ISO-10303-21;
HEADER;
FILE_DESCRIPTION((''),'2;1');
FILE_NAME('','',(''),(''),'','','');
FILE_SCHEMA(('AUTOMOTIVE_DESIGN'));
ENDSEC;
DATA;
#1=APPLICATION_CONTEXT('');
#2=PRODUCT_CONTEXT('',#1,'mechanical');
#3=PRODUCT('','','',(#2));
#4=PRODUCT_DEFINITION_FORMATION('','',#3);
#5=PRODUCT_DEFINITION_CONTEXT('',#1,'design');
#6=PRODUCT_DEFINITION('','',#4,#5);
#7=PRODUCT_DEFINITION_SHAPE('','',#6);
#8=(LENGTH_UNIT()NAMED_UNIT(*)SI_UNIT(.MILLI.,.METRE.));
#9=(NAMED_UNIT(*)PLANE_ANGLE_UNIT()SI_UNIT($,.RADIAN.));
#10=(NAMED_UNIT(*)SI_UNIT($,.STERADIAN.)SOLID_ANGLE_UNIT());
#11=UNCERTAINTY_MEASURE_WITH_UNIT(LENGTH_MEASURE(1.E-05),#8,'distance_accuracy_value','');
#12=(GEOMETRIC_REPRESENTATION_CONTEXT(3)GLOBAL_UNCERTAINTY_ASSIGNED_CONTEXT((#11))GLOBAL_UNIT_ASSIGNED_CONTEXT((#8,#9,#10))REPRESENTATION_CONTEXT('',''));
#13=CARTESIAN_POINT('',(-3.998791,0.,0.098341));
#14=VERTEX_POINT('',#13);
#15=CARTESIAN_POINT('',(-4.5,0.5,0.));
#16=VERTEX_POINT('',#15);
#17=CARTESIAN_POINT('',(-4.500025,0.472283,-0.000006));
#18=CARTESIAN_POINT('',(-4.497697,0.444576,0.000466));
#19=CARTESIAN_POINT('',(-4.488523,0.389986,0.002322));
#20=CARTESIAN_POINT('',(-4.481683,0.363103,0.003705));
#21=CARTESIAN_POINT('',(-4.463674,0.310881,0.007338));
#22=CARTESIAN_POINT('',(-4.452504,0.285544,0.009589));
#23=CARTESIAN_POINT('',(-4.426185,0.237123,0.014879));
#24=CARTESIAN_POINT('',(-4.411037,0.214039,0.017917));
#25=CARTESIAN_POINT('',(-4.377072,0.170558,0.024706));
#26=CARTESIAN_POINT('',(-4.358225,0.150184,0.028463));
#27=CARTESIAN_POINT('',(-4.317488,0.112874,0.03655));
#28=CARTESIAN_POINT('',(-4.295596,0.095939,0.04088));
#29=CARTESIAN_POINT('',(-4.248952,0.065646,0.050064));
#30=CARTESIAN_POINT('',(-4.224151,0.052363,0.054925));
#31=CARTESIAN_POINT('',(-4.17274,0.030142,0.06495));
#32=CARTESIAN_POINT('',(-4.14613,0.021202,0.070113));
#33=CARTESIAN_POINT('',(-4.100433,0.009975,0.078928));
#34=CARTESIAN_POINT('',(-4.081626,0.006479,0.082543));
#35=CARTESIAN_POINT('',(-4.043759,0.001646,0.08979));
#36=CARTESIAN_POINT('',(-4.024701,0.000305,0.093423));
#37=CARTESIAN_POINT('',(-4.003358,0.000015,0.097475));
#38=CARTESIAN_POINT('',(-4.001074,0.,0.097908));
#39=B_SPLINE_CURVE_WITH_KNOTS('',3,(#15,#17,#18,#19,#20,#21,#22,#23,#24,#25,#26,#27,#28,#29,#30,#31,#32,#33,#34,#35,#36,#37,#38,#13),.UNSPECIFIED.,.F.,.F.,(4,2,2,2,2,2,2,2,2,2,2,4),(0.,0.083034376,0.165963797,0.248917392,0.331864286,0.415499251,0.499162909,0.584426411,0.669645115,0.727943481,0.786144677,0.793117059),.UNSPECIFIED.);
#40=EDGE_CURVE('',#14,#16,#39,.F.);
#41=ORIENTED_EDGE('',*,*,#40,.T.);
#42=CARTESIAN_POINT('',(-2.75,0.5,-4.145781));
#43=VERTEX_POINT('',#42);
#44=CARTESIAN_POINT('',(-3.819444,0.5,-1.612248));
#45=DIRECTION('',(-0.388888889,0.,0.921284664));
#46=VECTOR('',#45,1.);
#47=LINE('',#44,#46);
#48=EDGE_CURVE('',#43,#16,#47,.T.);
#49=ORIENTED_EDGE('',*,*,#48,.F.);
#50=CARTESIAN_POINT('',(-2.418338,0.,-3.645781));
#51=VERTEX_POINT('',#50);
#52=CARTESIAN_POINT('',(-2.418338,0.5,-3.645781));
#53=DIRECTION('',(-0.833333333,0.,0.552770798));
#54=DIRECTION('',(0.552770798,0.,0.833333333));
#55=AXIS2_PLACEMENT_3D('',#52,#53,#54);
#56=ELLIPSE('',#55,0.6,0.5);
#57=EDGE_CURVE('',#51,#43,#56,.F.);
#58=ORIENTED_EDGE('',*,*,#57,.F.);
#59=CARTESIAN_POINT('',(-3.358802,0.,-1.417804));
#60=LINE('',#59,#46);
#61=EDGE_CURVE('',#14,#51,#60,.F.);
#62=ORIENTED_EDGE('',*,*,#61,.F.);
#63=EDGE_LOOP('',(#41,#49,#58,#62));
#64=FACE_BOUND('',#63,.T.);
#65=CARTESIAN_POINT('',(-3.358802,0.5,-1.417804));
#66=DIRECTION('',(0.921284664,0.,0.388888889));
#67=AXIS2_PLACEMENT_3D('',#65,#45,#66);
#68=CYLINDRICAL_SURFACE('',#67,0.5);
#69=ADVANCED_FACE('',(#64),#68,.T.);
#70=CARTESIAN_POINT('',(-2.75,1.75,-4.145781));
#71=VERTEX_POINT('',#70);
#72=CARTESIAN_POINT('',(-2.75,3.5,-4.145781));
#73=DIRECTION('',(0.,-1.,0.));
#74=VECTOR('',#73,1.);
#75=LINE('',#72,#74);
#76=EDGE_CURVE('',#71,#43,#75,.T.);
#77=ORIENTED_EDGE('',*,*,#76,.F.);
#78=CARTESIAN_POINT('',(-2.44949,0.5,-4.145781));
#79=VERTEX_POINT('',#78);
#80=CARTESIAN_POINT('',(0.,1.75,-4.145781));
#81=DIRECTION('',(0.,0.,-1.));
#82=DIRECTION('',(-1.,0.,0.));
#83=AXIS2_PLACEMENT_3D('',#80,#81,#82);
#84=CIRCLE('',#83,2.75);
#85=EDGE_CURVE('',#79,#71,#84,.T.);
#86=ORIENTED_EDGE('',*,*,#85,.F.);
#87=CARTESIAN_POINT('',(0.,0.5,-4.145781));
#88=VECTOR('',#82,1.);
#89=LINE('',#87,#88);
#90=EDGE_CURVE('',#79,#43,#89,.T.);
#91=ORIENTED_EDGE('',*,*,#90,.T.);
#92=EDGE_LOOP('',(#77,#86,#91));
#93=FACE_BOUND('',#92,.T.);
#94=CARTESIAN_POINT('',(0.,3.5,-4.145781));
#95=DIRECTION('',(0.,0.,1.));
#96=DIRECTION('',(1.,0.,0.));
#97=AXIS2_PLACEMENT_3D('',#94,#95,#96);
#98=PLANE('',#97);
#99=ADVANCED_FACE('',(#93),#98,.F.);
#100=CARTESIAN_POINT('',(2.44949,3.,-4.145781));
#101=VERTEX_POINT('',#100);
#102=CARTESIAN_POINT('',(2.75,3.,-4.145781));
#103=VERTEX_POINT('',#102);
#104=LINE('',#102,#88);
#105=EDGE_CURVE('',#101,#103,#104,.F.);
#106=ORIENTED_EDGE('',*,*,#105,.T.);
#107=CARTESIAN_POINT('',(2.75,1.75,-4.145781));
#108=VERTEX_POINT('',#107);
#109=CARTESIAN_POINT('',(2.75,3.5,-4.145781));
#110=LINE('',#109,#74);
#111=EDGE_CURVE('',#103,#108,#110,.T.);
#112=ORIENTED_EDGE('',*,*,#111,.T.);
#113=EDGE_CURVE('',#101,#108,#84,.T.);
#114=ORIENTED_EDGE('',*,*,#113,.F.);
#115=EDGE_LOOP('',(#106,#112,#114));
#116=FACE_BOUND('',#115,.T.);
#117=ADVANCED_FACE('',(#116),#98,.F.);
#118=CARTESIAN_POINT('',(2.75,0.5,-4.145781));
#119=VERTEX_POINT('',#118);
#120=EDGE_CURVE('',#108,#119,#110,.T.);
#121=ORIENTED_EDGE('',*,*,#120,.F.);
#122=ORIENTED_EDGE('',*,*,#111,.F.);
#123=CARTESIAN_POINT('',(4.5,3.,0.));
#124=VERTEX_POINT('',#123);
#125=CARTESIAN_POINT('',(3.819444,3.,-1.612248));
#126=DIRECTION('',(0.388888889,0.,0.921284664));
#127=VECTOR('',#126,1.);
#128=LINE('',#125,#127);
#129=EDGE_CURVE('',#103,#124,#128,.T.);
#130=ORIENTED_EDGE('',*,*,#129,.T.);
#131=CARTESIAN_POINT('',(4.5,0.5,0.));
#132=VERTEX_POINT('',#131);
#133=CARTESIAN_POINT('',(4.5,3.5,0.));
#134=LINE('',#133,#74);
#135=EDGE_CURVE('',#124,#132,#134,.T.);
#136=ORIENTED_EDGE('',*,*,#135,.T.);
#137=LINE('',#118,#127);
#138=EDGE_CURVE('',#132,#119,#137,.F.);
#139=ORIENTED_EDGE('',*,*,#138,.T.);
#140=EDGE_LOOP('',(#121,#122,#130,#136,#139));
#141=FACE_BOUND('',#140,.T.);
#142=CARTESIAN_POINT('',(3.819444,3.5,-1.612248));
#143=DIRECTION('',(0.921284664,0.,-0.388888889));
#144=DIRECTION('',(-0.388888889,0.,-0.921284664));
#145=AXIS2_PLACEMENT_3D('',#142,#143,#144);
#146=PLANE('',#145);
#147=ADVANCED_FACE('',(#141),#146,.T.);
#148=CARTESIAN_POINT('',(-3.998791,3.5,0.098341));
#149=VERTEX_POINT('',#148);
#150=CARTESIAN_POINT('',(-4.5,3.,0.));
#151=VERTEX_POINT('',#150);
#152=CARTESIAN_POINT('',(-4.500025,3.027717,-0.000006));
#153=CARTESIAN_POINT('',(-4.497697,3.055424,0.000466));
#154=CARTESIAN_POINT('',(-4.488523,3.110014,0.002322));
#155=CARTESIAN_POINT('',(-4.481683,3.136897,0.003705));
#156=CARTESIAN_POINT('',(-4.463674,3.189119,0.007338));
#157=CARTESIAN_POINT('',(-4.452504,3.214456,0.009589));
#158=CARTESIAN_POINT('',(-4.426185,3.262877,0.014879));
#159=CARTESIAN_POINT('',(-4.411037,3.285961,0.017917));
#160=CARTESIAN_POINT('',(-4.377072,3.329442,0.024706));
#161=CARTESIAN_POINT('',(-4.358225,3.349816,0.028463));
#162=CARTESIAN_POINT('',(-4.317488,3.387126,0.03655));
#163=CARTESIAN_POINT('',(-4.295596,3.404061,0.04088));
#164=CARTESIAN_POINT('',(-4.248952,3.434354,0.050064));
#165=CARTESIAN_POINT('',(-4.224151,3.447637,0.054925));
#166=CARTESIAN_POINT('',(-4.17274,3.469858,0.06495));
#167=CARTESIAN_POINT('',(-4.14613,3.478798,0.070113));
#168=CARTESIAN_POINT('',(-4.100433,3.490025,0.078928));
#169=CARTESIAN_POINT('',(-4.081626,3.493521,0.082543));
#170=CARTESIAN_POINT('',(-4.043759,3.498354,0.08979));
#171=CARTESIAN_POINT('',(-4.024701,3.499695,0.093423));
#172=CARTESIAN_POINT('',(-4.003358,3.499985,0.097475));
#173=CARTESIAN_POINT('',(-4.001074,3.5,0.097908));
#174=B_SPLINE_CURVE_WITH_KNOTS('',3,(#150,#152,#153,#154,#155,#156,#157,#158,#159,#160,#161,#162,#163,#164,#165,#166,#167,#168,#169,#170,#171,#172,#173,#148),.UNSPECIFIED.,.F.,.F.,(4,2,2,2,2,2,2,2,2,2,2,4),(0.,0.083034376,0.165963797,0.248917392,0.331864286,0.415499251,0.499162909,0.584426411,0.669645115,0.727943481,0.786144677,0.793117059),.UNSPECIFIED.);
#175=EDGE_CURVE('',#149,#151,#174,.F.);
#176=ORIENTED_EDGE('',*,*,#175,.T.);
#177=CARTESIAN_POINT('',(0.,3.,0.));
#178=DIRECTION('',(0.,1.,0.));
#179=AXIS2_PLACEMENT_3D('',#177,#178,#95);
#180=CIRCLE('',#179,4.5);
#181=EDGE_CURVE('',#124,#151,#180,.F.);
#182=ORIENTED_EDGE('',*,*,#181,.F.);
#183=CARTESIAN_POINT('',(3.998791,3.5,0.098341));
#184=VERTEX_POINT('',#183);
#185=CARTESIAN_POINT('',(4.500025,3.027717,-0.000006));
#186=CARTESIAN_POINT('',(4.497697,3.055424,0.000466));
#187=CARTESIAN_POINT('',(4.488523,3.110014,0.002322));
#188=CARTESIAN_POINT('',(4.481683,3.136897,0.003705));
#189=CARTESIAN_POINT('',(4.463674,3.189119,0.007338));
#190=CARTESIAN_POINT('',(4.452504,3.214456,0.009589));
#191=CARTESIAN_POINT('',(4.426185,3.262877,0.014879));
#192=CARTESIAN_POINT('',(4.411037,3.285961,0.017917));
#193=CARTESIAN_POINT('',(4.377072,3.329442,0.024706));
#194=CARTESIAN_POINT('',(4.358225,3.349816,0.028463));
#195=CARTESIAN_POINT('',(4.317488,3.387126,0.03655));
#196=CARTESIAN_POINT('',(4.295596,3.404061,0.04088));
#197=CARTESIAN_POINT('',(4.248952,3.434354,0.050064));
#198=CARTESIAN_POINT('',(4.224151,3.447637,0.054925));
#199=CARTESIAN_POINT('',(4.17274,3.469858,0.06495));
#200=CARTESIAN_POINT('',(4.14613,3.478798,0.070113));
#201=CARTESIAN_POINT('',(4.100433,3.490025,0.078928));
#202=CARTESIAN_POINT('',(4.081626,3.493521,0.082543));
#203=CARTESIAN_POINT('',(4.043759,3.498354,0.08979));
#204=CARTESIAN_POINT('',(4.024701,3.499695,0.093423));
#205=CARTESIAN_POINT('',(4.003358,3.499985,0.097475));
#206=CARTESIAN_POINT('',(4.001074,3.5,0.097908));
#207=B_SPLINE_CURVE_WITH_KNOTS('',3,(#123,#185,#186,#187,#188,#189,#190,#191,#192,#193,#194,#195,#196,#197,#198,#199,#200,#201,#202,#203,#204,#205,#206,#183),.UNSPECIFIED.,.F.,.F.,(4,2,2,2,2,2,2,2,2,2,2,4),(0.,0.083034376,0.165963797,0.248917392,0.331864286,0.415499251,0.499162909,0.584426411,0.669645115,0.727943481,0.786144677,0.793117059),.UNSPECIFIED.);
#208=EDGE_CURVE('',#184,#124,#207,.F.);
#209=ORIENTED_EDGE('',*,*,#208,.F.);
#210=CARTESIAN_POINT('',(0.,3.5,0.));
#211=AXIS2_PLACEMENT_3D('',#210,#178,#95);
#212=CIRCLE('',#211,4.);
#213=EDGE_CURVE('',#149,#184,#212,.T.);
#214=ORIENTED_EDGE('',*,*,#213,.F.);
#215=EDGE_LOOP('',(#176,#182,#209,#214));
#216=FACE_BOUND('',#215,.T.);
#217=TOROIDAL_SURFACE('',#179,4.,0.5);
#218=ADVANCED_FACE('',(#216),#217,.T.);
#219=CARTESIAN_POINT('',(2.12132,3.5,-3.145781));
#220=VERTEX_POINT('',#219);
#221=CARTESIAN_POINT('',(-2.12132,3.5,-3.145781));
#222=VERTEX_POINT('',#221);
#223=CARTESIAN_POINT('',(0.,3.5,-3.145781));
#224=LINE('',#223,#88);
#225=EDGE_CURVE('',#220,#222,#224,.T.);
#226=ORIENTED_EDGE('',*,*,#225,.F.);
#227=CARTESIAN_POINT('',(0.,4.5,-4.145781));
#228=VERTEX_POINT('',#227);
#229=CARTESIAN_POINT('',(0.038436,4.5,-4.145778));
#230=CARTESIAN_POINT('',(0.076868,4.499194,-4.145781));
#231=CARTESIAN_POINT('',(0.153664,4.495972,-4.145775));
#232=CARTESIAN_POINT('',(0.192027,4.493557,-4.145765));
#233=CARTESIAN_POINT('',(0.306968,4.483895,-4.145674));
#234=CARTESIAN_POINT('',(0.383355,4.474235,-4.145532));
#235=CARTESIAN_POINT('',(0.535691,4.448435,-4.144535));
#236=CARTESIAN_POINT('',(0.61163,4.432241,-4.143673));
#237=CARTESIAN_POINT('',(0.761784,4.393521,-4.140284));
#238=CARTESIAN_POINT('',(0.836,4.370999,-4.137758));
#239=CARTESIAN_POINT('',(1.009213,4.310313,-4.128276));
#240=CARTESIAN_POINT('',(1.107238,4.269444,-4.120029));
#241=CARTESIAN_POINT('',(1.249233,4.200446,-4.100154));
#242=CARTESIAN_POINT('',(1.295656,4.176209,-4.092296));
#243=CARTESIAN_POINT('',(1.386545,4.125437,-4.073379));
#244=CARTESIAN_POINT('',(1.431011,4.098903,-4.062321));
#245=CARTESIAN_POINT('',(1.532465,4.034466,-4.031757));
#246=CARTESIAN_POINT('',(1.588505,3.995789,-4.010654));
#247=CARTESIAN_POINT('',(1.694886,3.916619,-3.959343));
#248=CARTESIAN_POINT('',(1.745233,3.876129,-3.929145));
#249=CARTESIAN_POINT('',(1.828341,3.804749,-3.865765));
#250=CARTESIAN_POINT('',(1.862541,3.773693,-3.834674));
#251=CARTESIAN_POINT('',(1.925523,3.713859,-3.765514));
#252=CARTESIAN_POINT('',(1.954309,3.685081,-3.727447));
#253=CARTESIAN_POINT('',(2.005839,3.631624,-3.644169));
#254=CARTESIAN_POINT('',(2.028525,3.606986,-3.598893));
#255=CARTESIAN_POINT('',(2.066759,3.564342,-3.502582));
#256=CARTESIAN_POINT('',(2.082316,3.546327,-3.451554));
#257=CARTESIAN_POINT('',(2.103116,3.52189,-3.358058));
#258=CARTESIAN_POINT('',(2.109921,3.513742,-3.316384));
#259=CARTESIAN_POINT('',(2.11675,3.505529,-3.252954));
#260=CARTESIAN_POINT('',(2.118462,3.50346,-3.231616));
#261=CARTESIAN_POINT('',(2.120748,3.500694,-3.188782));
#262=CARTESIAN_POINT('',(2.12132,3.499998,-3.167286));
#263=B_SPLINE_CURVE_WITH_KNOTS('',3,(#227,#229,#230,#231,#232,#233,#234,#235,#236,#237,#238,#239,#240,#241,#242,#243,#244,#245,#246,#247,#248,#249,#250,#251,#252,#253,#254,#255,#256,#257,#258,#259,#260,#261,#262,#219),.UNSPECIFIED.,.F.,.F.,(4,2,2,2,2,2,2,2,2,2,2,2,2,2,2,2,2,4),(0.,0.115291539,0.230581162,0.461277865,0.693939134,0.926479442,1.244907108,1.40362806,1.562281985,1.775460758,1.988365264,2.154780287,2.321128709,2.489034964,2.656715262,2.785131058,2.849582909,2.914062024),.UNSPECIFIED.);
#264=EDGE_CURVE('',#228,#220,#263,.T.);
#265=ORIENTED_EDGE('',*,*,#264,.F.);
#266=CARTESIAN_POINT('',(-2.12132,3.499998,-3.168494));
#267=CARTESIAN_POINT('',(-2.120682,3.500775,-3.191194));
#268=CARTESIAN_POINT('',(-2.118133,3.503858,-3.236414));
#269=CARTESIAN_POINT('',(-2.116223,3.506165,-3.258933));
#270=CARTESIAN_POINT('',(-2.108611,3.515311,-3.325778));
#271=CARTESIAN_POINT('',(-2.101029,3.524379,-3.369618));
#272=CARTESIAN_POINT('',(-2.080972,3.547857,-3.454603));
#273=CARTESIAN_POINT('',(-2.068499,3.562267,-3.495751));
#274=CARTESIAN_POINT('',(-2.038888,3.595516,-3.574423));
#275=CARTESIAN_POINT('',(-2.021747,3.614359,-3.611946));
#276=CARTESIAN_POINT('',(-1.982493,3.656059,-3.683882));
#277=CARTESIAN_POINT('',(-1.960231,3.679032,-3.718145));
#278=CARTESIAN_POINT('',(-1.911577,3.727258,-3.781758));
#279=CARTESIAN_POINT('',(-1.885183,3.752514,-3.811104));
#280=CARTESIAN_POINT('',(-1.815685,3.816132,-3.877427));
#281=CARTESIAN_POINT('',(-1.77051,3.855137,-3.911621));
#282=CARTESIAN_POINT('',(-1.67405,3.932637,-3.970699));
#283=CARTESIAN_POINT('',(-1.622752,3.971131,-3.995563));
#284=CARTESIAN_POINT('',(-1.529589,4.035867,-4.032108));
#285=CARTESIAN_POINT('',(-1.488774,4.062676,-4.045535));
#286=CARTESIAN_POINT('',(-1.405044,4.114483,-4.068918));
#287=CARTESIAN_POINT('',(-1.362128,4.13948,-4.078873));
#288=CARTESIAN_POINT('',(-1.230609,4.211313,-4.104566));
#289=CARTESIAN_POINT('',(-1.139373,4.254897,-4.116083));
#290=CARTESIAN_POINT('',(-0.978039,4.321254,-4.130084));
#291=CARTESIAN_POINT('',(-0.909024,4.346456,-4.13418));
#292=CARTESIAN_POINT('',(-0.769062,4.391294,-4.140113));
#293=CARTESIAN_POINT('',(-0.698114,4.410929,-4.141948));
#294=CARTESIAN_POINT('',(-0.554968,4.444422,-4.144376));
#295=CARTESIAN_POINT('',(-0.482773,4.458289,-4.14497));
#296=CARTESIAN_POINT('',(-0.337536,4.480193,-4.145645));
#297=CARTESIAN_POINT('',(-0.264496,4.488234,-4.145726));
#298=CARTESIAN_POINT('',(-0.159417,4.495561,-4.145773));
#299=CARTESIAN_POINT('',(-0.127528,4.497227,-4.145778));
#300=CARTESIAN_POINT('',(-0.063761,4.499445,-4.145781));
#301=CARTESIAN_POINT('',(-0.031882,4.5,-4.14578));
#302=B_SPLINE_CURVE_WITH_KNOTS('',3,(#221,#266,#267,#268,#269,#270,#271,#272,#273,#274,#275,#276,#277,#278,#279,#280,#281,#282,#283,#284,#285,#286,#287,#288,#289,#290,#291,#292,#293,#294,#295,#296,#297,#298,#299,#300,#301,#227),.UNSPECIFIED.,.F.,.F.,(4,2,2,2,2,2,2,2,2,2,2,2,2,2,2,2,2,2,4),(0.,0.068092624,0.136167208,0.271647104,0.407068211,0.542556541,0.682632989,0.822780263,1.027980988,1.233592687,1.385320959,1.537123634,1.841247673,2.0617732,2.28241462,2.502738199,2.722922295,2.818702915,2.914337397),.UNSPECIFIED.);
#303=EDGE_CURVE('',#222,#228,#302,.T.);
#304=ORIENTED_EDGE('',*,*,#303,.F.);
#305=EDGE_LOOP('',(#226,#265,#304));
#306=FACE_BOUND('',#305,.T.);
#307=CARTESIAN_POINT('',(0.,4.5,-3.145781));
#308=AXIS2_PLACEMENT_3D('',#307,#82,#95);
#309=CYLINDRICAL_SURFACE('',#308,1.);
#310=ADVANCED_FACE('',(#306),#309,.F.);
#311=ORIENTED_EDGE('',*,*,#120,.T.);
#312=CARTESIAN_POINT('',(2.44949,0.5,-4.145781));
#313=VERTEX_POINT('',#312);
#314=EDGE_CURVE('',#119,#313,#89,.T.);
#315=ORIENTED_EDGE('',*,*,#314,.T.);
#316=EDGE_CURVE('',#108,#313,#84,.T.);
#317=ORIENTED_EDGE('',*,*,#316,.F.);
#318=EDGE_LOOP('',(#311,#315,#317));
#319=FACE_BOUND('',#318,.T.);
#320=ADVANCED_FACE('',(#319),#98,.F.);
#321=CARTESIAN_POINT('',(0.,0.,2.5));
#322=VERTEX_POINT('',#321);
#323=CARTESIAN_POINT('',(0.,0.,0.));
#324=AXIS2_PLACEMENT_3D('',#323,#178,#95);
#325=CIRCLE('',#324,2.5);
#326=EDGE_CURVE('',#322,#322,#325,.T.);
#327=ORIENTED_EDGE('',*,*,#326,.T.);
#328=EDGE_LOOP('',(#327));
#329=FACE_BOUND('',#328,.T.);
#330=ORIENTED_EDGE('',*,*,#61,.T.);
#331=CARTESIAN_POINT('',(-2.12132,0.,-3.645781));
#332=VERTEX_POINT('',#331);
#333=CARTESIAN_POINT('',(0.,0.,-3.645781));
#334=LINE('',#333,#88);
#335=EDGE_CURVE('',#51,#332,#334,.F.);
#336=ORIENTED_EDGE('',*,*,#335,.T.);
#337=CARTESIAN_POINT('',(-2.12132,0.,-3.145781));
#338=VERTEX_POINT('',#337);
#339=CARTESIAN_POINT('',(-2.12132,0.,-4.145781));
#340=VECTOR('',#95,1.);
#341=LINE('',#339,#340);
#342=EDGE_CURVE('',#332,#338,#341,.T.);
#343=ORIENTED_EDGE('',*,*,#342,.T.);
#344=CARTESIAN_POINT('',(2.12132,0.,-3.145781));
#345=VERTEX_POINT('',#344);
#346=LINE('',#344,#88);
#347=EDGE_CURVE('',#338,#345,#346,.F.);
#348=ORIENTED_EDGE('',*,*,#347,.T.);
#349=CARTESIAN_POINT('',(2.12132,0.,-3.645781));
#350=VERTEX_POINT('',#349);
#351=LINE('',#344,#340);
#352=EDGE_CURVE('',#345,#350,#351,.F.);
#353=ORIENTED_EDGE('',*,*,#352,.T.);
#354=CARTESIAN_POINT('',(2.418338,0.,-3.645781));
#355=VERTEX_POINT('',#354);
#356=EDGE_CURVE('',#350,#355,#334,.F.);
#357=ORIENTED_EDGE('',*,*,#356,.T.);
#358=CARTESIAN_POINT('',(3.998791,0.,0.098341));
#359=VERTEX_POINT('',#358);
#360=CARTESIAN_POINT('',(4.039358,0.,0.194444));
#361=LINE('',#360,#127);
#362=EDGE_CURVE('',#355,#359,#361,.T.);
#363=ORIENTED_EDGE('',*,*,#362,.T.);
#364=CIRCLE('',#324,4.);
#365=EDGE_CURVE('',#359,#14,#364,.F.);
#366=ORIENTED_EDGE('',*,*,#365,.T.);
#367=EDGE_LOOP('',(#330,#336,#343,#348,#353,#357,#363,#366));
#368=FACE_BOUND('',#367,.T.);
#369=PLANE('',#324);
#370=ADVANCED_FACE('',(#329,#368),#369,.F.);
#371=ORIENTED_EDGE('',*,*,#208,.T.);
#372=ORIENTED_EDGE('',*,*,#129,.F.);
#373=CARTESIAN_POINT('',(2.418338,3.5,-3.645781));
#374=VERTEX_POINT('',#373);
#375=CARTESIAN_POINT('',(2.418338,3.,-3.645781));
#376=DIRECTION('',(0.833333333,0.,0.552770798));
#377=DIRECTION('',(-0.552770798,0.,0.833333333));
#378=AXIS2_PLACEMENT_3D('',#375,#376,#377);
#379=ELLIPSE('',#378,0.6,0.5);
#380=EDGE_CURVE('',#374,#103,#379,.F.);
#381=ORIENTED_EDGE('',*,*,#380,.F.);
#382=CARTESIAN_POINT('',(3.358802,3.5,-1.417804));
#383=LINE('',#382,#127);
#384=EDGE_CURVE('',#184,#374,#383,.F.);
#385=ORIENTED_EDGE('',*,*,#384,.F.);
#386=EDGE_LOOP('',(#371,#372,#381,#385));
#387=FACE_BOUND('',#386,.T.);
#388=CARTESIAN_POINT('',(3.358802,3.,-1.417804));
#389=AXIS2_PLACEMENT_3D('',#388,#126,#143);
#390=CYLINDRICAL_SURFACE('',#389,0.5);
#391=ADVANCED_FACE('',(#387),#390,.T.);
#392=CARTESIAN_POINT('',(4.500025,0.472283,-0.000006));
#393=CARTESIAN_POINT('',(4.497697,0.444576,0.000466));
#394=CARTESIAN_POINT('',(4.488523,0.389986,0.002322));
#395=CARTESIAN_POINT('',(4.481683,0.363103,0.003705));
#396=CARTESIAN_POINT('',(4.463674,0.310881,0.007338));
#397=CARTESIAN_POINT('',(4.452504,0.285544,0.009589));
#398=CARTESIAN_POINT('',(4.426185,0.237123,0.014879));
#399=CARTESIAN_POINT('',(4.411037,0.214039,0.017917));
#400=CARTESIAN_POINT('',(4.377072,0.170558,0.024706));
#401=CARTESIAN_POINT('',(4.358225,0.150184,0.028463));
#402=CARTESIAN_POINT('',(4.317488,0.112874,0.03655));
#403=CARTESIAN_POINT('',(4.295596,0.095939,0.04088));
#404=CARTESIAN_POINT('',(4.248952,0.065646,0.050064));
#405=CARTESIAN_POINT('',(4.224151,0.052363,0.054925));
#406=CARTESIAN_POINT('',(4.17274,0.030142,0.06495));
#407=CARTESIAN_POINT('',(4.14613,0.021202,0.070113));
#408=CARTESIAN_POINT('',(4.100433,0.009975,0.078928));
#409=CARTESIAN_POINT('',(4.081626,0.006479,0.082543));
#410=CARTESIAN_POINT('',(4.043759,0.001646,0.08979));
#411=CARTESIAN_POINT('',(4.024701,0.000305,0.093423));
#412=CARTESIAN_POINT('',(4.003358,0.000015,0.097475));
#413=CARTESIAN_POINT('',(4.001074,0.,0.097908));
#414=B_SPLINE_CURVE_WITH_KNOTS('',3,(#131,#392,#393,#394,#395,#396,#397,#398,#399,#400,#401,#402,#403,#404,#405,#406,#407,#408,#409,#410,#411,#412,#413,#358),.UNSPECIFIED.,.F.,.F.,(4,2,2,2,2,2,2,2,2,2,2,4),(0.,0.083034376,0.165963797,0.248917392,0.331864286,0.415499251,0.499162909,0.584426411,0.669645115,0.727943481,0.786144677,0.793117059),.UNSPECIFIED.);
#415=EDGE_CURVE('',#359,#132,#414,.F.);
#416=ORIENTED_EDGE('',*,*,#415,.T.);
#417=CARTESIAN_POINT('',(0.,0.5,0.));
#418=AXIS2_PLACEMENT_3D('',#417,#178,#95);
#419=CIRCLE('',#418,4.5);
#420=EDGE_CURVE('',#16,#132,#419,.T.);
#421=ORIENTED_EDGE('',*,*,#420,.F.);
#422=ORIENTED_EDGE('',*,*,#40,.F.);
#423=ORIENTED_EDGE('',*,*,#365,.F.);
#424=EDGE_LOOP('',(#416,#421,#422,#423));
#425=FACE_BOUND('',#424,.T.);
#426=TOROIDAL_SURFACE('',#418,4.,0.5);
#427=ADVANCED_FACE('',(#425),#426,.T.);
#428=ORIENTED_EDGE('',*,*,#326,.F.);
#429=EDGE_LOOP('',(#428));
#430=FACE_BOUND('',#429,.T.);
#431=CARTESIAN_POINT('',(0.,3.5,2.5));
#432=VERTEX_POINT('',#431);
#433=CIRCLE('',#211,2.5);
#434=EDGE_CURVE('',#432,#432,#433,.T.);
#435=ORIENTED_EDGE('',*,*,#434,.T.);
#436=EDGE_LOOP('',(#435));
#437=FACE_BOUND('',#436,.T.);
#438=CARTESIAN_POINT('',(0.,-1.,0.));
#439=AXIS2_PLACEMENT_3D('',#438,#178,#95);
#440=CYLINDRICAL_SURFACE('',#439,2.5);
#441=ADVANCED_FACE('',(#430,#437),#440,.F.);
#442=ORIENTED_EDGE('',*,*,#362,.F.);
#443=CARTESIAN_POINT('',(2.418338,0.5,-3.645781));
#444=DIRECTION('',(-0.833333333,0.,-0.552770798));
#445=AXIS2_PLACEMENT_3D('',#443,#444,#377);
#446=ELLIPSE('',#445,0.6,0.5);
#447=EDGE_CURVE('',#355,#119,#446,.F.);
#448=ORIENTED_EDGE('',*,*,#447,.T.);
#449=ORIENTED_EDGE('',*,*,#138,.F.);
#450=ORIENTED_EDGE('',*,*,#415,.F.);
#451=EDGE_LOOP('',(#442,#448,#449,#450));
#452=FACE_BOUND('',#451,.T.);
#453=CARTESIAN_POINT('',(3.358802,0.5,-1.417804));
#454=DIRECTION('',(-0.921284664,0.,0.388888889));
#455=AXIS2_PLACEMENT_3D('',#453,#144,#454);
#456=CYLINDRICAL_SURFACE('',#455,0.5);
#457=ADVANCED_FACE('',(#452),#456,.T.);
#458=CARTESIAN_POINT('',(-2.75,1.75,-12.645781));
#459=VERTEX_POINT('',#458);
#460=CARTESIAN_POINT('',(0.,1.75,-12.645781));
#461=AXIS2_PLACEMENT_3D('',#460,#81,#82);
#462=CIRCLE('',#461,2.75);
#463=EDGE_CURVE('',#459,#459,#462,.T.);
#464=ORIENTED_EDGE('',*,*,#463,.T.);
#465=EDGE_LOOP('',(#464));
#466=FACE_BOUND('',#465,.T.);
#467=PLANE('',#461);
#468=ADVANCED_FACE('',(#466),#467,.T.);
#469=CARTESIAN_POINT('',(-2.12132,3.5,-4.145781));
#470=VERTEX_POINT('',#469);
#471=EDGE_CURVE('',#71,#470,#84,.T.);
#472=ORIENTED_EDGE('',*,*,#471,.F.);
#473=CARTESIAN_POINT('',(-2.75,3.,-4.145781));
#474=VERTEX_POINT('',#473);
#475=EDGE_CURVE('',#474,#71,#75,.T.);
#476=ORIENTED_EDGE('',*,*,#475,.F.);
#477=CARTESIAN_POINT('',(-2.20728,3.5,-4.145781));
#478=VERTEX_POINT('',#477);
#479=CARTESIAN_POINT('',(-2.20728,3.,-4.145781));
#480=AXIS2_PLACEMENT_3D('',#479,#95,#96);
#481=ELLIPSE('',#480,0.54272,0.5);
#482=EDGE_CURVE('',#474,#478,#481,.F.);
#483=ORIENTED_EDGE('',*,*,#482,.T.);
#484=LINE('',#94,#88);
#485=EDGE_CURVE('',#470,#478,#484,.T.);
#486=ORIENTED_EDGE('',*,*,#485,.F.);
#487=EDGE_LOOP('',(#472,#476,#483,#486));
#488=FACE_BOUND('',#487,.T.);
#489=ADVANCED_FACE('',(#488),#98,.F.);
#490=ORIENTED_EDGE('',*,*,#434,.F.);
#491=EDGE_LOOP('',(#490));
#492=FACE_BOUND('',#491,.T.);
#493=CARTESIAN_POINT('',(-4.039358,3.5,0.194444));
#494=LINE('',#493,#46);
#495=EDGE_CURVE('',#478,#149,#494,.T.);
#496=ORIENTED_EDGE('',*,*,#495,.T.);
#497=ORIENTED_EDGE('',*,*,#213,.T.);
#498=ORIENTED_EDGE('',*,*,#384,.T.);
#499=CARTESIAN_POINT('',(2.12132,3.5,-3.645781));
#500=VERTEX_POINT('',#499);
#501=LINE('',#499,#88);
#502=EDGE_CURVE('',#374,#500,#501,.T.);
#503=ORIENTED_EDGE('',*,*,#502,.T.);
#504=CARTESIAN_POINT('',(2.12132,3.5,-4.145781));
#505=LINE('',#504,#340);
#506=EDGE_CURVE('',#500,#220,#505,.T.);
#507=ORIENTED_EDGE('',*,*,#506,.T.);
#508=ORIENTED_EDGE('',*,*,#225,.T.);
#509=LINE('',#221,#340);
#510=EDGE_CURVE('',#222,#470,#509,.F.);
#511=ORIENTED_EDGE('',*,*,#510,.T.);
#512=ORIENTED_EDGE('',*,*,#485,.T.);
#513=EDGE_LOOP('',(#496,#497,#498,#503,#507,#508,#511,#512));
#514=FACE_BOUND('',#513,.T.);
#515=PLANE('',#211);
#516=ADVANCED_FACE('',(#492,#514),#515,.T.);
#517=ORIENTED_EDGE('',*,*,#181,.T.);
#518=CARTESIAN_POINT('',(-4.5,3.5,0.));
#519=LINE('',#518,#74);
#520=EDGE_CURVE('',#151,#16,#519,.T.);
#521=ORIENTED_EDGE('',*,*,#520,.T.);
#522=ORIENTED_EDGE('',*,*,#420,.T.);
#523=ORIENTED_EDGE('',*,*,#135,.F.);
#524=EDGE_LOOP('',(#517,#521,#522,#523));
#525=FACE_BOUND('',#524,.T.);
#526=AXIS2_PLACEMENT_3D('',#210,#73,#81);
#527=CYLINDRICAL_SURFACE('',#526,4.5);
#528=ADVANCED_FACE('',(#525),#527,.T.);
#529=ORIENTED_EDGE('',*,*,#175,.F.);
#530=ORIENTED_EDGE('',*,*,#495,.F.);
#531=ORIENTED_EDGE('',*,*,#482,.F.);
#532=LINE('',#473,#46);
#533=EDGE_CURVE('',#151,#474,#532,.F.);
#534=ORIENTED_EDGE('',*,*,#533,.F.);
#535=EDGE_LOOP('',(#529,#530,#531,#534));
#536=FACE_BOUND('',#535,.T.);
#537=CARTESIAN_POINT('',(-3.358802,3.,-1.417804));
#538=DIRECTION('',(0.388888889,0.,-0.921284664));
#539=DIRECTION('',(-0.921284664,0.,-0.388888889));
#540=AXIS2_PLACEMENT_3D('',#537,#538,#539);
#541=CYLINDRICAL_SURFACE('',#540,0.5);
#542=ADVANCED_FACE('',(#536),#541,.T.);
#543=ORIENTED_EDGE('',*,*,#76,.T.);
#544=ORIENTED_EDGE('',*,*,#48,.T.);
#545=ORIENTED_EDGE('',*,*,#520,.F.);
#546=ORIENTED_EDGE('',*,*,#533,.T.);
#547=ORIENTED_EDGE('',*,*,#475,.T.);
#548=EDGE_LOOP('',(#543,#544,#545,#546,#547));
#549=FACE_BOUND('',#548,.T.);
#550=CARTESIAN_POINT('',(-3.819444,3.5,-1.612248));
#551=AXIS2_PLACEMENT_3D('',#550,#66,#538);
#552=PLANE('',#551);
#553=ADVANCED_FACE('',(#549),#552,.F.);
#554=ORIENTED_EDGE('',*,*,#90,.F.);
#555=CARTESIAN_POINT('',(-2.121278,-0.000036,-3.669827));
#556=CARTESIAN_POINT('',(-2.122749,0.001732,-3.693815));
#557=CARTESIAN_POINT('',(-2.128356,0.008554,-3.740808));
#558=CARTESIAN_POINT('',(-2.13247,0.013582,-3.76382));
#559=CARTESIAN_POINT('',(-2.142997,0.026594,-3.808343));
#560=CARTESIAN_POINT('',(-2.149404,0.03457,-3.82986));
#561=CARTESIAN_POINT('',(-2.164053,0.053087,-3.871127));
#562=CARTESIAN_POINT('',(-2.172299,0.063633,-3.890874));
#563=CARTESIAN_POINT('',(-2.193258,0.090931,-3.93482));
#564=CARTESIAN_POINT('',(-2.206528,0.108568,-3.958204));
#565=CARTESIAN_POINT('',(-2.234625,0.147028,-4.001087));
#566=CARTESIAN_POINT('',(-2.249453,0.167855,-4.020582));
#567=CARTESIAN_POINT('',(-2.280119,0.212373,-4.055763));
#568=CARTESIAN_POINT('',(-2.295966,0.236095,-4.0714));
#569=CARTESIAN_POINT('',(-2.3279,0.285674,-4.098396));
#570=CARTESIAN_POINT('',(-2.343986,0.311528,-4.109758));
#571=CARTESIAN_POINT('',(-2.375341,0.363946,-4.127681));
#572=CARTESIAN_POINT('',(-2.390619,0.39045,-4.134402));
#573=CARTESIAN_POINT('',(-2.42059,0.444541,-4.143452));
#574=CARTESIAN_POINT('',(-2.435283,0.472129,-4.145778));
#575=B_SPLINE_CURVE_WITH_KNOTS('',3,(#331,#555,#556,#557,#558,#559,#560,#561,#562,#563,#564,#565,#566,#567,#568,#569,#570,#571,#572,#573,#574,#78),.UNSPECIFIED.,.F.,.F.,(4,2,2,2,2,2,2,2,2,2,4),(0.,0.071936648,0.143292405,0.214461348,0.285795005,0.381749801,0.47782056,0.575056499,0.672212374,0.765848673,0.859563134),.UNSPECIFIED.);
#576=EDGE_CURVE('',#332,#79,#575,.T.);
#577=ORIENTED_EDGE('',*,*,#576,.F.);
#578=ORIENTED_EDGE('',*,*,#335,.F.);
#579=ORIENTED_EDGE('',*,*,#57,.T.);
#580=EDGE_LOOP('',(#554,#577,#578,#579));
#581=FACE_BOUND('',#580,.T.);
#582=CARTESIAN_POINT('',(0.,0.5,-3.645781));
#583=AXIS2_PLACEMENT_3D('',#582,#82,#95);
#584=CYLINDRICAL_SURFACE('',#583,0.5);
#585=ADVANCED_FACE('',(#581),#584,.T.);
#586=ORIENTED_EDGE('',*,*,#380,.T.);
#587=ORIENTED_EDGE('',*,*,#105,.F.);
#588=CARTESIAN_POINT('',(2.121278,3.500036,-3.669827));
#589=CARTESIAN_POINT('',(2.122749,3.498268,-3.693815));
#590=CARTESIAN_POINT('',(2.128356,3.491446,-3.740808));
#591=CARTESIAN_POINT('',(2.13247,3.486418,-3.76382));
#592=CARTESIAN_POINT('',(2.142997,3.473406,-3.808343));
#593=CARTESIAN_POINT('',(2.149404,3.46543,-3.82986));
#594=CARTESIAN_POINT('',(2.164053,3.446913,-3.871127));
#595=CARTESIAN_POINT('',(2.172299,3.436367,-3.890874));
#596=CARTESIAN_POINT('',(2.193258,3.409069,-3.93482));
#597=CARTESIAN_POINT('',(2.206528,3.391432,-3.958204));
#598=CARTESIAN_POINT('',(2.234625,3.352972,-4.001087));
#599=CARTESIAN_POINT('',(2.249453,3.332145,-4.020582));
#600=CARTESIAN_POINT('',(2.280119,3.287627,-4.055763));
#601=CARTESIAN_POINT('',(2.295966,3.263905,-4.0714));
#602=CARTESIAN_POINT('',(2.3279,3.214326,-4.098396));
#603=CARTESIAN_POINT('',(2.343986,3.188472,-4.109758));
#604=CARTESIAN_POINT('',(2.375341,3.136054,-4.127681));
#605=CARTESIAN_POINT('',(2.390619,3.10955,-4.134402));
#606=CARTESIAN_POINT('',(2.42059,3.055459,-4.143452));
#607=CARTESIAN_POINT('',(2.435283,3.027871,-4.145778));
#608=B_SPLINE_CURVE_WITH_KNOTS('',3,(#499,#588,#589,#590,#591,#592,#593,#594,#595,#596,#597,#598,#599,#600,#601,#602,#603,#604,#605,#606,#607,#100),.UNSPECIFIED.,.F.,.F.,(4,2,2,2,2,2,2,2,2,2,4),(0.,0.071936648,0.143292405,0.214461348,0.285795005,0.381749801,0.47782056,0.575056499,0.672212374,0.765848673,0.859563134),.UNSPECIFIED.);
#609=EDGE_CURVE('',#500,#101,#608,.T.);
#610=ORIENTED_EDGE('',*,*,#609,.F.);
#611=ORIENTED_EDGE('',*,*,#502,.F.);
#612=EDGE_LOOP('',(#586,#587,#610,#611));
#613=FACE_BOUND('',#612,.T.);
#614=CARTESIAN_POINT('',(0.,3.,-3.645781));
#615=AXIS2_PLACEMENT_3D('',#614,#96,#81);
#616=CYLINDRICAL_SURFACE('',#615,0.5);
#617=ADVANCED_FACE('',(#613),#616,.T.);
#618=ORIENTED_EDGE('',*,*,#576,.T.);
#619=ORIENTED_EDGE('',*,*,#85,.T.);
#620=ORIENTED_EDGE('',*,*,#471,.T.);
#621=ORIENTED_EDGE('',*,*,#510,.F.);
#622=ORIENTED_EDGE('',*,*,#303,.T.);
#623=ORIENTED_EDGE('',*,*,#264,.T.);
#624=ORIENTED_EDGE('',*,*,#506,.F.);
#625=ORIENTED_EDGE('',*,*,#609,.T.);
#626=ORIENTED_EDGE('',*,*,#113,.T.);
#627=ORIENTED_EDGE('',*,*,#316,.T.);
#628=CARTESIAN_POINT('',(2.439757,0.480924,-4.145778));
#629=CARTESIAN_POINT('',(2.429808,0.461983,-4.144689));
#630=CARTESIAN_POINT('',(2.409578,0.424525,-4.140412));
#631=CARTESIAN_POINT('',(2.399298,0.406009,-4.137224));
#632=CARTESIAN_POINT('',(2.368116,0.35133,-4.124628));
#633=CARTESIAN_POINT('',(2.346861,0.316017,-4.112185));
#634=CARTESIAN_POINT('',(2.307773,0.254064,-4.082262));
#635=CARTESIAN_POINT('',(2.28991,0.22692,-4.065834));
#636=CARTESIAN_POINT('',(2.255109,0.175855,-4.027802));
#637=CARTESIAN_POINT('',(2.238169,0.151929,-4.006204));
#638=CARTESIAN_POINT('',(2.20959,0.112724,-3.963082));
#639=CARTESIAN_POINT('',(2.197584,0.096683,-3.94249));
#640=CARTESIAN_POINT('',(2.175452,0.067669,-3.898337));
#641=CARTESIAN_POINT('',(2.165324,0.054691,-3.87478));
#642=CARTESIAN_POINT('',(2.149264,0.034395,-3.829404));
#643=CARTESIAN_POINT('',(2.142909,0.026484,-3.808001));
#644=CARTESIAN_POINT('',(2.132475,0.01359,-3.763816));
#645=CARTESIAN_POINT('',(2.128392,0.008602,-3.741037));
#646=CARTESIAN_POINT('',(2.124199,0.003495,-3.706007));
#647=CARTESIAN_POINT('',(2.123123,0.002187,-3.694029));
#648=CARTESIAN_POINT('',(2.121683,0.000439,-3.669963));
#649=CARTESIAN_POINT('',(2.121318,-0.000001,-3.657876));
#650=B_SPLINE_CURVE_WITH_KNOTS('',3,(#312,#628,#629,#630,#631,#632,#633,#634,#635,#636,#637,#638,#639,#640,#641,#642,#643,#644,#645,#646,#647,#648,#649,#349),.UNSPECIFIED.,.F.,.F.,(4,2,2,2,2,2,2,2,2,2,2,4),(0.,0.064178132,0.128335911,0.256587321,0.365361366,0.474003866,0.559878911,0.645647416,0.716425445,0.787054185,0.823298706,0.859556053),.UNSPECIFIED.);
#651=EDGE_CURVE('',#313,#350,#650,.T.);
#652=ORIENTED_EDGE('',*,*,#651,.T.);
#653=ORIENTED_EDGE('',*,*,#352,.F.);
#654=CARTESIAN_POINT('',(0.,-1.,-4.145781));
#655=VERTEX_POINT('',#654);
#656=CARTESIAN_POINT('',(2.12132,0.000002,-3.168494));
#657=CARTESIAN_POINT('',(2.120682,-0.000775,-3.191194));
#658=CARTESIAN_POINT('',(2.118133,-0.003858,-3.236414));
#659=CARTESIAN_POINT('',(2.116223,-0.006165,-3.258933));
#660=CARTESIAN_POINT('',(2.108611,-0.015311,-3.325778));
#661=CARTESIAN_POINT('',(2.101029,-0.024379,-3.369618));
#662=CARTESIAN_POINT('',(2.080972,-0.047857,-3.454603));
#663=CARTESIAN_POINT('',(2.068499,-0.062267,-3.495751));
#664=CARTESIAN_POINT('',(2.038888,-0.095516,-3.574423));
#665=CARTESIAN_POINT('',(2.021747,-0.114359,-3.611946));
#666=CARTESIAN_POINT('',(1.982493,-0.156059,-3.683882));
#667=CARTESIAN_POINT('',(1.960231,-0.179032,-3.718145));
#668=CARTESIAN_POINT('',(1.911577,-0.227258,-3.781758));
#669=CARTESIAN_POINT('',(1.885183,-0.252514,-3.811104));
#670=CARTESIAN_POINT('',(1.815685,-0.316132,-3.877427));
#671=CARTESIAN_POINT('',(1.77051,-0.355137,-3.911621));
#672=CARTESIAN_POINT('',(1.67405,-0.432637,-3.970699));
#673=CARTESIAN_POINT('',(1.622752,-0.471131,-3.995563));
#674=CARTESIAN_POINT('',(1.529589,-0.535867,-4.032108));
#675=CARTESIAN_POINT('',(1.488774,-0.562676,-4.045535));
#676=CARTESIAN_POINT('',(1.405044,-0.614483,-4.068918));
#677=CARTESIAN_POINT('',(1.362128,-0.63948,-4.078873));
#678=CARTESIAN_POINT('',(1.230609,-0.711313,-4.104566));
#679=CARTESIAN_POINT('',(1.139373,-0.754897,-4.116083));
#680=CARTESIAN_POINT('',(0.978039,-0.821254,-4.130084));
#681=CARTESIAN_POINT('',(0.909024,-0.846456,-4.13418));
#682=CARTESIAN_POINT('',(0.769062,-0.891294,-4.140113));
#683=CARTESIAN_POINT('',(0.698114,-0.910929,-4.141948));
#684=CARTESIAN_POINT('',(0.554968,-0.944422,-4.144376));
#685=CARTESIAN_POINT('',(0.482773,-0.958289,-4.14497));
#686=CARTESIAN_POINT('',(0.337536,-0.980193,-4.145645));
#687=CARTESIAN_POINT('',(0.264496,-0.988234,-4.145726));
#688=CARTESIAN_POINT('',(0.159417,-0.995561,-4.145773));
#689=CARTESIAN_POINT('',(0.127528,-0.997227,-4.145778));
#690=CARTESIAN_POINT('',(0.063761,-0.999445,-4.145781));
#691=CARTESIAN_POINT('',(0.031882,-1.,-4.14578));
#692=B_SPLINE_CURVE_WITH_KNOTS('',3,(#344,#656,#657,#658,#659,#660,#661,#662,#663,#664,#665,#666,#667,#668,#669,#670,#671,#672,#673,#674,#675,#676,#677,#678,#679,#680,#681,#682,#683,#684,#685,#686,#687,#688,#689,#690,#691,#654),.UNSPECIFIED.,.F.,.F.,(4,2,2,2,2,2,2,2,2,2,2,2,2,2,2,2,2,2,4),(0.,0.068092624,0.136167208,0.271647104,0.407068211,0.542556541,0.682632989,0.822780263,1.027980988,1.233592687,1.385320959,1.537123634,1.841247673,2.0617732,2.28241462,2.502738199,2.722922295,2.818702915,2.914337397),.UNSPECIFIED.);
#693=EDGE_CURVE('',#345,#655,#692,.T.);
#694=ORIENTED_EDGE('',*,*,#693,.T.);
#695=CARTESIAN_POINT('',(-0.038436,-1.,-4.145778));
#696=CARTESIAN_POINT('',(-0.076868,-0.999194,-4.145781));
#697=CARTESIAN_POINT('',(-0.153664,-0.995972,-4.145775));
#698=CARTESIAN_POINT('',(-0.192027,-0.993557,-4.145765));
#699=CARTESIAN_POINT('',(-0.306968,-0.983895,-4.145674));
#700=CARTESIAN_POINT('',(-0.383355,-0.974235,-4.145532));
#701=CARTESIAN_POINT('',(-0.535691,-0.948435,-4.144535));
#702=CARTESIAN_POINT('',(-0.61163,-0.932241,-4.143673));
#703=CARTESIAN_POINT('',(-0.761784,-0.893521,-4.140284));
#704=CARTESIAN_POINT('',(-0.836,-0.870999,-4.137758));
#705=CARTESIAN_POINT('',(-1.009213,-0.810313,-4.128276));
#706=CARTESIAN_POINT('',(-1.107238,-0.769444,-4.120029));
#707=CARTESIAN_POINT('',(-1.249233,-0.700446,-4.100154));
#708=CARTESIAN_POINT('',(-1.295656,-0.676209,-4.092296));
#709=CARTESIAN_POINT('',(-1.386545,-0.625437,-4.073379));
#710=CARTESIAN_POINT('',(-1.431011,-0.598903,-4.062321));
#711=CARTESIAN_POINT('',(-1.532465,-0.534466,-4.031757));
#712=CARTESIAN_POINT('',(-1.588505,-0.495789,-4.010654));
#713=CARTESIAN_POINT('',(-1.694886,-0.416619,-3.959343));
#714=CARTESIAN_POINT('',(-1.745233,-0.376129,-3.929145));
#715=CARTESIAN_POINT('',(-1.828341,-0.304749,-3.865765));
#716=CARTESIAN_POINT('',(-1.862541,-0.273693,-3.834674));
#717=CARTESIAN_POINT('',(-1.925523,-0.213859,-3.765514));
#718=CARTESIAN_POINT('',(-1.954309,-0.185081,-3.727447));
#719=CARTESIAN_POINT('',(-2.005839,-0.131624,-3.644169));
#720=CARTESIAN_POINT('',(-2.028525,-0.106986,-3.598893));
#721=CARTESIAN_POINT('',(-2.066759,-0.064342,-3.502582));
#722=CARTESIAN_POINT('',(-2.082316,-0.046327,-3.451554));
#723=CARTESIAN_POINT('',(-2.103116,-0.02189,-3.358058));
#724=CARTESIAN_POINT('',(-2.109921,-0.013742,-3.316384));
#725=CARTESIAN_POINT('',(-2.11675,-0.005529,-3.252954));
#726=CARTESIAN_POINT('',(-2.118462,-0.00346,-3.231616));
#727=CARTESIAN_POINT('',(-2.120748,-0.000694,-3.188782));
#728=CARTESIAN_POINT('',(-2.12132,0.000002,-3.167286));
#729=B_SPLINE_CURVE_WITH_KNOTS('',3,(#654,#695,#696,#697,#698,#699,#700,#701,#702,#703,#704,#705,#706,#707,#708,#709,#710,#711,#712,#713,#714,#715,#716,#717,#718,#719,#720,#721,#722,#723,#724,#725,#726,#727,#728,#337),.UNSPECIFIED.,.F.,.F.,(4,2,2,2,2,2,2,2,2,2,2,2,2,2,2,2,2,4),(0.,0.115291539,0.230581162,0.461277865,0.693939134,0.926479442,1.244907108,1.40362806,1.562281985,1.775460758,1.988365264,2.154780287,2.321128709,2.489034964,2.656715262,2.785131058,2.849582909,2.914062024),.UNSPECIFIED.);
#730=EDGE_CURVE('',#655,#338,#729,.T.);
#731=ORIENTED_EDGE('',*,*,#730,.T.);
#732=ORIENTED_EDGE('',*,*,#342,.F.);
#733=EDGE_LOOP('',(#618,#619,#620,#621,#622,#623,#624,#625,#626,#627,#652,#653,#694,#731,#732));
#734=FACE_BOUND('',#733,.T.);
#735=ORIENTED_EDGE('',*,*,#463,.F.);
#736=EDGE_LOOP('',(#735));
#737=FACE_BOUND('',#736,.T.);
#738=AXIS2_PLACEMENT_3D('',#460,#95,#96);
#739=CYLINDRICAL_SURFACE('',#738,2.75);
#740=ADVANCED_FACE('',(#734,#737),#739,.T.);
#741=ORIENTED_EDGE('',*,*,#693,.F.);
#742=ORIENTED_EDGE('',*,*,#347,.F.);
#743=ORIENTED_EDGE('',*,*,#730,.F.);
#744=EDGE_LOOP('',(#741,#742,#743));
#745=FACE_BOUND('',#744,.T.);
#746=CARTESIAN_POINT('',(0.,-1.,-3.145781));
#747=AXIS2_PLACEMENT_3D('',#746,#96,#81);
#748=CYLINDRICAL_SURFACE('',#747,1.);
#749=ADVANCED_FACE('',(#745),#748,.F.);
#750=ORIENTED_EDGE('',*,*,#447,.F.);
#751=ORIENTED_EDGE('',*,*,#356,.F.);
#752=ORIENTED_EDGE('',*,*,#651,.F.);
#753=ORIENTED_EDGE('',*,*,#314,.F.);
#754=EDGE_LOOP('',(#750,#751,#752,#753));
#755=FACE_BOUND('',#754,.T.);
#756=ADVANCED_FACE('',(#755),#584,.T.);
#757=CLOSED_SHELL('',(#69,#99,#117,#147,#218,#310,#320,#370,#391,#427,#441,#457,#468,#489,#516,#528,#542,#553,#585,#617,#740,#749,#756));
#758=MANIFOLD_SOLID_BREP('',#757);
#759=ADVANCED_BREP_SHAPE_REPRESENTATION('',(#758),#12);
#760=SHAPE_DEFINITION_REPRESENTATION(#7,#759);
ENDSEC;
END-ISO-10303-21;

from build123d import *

# Parameters (mm, degrees)
EXTRUDE_1_DEPTH     = 3.5
SKETCH_2_R          = 2.75
EXTRUDE_2_DEPTH     = 8.5
FILLET_1_R          = 1
FILLET_2_R          = 1
SKETCH_3_R          = 2.5
CUT_EXTRUDE_1_DEPTH = 15.156827953
FILLET_3_R          = 0.5


with BuildPart() as part:
    # ｽｹｯﾁ1 → ﾎﾞｽ - 押し出し1 (new body)
    with BuildSketch(Plane(origin=(0, 0, 0), x_dir=(1, 0, 0), z_dir=(0, 1, 0))):
        Polygon((-4.5, 0), (0, 0), (0, 4.145780988), (-2.75, 4.145780988), align=None)
        with BuildLine():
            Line((4.5, 0), (0, 0))
            Line((0, 0), (-4.5, 0))
            ThreePointArc((-4.5, 0), (0, -4.5), (4.5, 0))
        make_face()
        Polygon((2.75, 4.145780988), (4.5, 0), (0, 0), (0, 4.145780988), align=None)
    extrude(amount=EXTRUDE_1_DEPTH)

    # ｽｹｯﾁ2 → ﾎﾞｽ - 押し出し2 (add)
    with BuildSketch(Plane(origin=(0, 0, -4.145780988), x_dir=(-1, 0, 0), z_dir=(0, 0, -1))):
        with Locations((0, 1.75)):
            Circle(SKETCH_2_R)
    extrude(amount=EXTRUDE_2_DEPTH)

    # ﾌｨﾚｯﾄ1
    # the kernel refuses this fillet: 1 mm, written as the material it adds along each edge
    with BuildSketch(Plane(origin=(4.621320344, 0, -4.145780988), x_dir=(0, 0, 1), z_dir=(-1, 0, 0))) as fillet_1_piece_1_section:
        with BuildLine():
            CenterArc((FILLET_1_R, -FILLET_1_R), FILLET_1_R, 90, 90)
            Line((0, -FILLET_1_R), (0, 0))
            Line((0, 0), (FILLET_1_R, 0))
        make_face()
    fillet_1_piece_1 = extrude(amount=9.242640687, mode=Mode.PRIVATE)
    fillet_1_piece_1 = fillet_1_piece_1 & Plane(origin=(0, 1.75, -3.914317748), x_dir=(-1, 0, 0), z_dir=(0, 0, 1)) * Cylinder(2.75, 23, mode=Mode.PRIVATE)
    add(fillet_1_piece_1)

    # ﾌｨﾚｯﾄ2
    # the kernel refuses this fillet: 1 mm, written as the material it adds along each edge
    with BuildSketch(Plane(origin=(-4.621320344, 3.5, -4.145780988), x_dir=(0, 1, 0), z_dir=(1, 0, 0))) as fillet_2_piece_1_section:
        with BuildLine():
            CenterArc((FILLET_2_R, FILLET_2_R), FILLET_2_R, 180, 90)
            Line((0, FILLET_2_R), (0, 0))
            Line((0, 0), (FILLET_2_R, 0))
        make_face()
    fillet_2_piece_1 = extrude(amount=9.242640687, mode=Mode.PRIVATE)
    fillet_2_piece_1 = fillet_2_piece_1 & Plane(origin=(0, 1.75, -3.91431771), x_dir=(-1, 0, 0), z_dir=(0, 0, 1)) * Cylinder(2.75, 23, mode=Mode.PRIVATE)
    add(fillet_2_piece_1)

    # ｽｹｯﾁ3 → ｶｯﾄ - 押し出し1 (cut, through all)
    with BuildSketch(Plane(origin=(0, 3.5, 0), x_dir=(1, 0, 0), z_dir=(0, 1, 0))):
        with Locations(Location((0, 0, 0), (0, 0, 270))):
            Circle(SKETCH_3_R)
    extrude(amount=-CUT_EXTRUDE_1_DEPTH, mode=Mode.SUBTRACT)

    # ﾌｨﾚｯﾄ3
    # the kernel refuses this fillet: 0.5 mm, written as the material it takes off along each edge
    with BuildSketch(Plane(origin=(-0.871320344, 0, -4.145780988), x_dir=(0, 1, 0), z_dir=(-1, 0, 0))) as fillet_3_piece_1_section:
        with BuildLine():
            CenterArc((FILLET_3_R, -FILLET_3_R), FILLET_3_R, 90, 90)
            Line((0, -FILLET_3_R), (0, 0))
            Line((0, 0), (FILLET_3_R, 0))
        make_face()
    fillet_3_piece_1 = extrude(amount=3.128679656, mode=Mode.PRIVATE)
    fillet_3_piece_1 = fillet_3_piece_1 - Plane(origin=(0, 1.75, -4.02149164), x_dir=(-1, 0, 0), z_dir=(0, 0, 1)) * Cylinder(2.75, 9, mode=Mode.PRIVATE)
    add(fillet_3_piece_1, mode=Mode.SUBTRACT)
    with BuildSketch(Plane(origin=(-2.263888889, 0, -5.297386818), x_dir=(0, 1, 0), z_dir=(-0.3888888888844502, 0, 0.9212846639894848))) as fillet_3_piece_2_section:
        with BuildLine():
            CenterArc((FILLET_3_R, -FILLET_3_R), FILLET_3_R, 90, 90)
            Line((0, -FILLET_3_R), (0, 0))
            Line((0, 0), (FILLET_3_R, 0))
        make_face()
    fillet_3_piece_2 = extrude(amount=7, mode=Mode.PRIVATE)
    fillet_3_piece_2 = split(fillet_3_piece_2, bisect_by=Plane(origin=(-2.809521529, 0.121561121, -4.145780988), z_dir=(0, 0, 1)), keep=Keep.TOP, mode=Mode.PRIVATE)
    add(fillet_3_piece_2, mode=Mode.SUBTRACT)
    with BuildSketch(Plane(origin=(0, 0, 0), x_dir=(-0.9615445935244931, 0, -0.2746488570225942), z_dir=(0.2746488570225942, 0, -0.9615445935244931))) as fillet_3_piece_3:
        with BuildLine():
            CenterArc((4.5 - FILLET_3_R, FILLET_3_R), FILLET_3_R, 270, 90)
            Line((4.5 - FILLET_3_R, 0), (4.5, 0))
            Line((4.5, 0), (4.5, FILLET_3_R))
        make_face()
    revolve(axis=Axis((0, 0, 0), (0, 1, 0)), revolution_arc=211.882178867, mode=Mode.SUBTRACT)
    with BuildSketch(Plane(origin=(2.263888889, 0, -5.297386818), x_dir=(0, 1, 0), z_dir=(0.3888888888844502, 0, 0.9212846639894848))) as fillet_3_piece_4_section:
        with BuildLine():
            CenterArc((FILLET_3_R, FILLET_3_R), FILLET_3_R, 180, 90)
            Line((0, FILLET_3_R), (0, 0))
            Line((0, 0), (FILLET_3_R, 0))
        make_face()
    fillet_3_piece_4 = extrude(amount=7, mode=Mode.PRIVATE)
    fillet_3_piece_4 = split(fillet_3_piece_4, bisect_by=Plane(origin=(2.809522327, 0.121559787, -4.145780988), z_dir=(0, 0, 1)), keep=Keep.TOP, mode=Mode.PRIVATE)
    add(fillet_3_piece_4, mode=Mode.SUBTRACT)
    with BuildSketch(Plane(origin=(4, 0, -4.145780988), x_dir=(0, 1, 0), z_dir=(-1, 0, 0))) as fillet_3_piece_5_section:
        with BuildLine():
            CenterArc((FILLET_3_R, -FILLET_3_R), FILLET_3_R, 90, 90)
            Line((0, -FILLET_3_R), (0, 0))
            Line((0, 0), (FILLET_3_R, 0))
        make_face()
    fillet_3_piece_5 = extrude(amount=3.128679656, mode=Mode.PRIVATE)
    fillet_3_piece_5 = fillet_3_piece_5 - Plane(origin=(0, 1.75, -4.021491718), x_dir=(-1, 0, 0), z_dir=(0, 0, 1)) * Cylinder(2.75, 9, mode=Mode.PRIVATE)
    add(fillet_3_piece_5, mode=Mode.SUBTRACT)
    with BuildSketch(Plane(origin=(0.871320344, 3.5, -4.145780988), x_dir=(0, 0, 1), z_dir=(1, 0, 0))) as fillet_3_piece_6_section:
        with BuildLine():
            CenterArc((FILLET_3_R, FILLET_3_R), FILLET_3_R, 180, 90)
            Line((0, FILLET_3_R), (0, 0))
            Line((0, 0), (FILLET_3_R, 0))
        make_face()
    fillet_3_piece_6 = extrude(amount=3.128679656, mode=Mode.PRIVATE)
    fillet_3_piece_6 = fillet_3_piece_6 - Plane(origin=(0, 1.75, -4.021491695), x_dir=(-1, 0, 0), z_dir=(0, 0, 1)) * Cylinder(2.75, 9, mode=Mode.PRIVATE)
    add(fillet_3_piece_6, mode=Mode.SUBTRACT)
    with BuildSketch(Plane(origin=(-2.263888889, 3.5, -5.297386818), x_dir=(0.9212846639894847, 0, 0.38888888888445017), z_dir=(-0.3888888888844502, 0, 0.9212846639894848))) as fillet_3_piece_7_section:
        with BuildLine():
            CenterArc((FILLET_3_R, -FILLET_3_R), FILLET_3_R, 90, 90)
            Line((0, -FILLET_3_R), (0, 0))
            Line((0, 0), (FILLET_3_R, 0))
        make_face()
    fillet_3_piece_7 = extrude(amount=7, mode=Mode.PRIVATE)
    fillet_3_piece_7 = split(fillet_3_piece_7, bisect_by=Plane(origin=(-2.809521492, 3.378439196, -4.145780988), z_dir=(0, 0, 1)), keep=Keep.TOP, mode=Mode.PRIVATE)
    add(fillet_3_piece_7, mode=Mode.SUBTRACT)
    with BuildSketch(Plane(origin=(0, 3.5, 0), x_dir=(-0.9615445935244931, 0, -0.2746488570225942), z_dir=(0.2746488570225942, 0, -0.9615445935244931))) as fillet_3_piece_8:
        with BuildLine():
            CenterArc((4.5 - FILLET_3_R, -FILLET_3_R), FILLET_3_R, 0, 90)
            Line((4.5, -FILLET_3_R), (4.5, 0))
            Line((4.5, 0), (4.5 - FILLET_3_R, 0))
        make_face()
    revolve(axis=Axis((0, 3.5, 0), (0, 1, 0)), revolution_arc=211.882178867, mode=Mode.SUBTRACT)
    with BuildSketch(Plane(origin=(2.263888889, 3.5, -5.297386818), x_dir=(-0.9212846639894847, 0, 0.38888888888445017), z_dir=(0.3888888888844502, 0, 0.9212846639894848))) as fillet_3_piece_9_section:
        with BuildLine():
            CenterArc((FILLET_3_R, FILLET_3_R), FILLET_3_R, 180, 90)
            Line((0, FILLET_3_R), (0, 0))
            Line((0, 0), (FILLET_3_R, 0))
        make_face()
    fillet_3_piece_9 = extrude(amount=7, mode=Mode.PRIVATE)
    fillet_3_piece_9 = split(fillet_3_piece_9, bisect_by=Plane(origin=(2.80952229, 3.37844053, -4.145780988), z_dir=(0, 0, 1)), keep=Keep.TOP, mode=Mode.PRIVATE)
    add(fillet_3_piece_9, mode=Mode.SUBTRACT)


solid = part.part
